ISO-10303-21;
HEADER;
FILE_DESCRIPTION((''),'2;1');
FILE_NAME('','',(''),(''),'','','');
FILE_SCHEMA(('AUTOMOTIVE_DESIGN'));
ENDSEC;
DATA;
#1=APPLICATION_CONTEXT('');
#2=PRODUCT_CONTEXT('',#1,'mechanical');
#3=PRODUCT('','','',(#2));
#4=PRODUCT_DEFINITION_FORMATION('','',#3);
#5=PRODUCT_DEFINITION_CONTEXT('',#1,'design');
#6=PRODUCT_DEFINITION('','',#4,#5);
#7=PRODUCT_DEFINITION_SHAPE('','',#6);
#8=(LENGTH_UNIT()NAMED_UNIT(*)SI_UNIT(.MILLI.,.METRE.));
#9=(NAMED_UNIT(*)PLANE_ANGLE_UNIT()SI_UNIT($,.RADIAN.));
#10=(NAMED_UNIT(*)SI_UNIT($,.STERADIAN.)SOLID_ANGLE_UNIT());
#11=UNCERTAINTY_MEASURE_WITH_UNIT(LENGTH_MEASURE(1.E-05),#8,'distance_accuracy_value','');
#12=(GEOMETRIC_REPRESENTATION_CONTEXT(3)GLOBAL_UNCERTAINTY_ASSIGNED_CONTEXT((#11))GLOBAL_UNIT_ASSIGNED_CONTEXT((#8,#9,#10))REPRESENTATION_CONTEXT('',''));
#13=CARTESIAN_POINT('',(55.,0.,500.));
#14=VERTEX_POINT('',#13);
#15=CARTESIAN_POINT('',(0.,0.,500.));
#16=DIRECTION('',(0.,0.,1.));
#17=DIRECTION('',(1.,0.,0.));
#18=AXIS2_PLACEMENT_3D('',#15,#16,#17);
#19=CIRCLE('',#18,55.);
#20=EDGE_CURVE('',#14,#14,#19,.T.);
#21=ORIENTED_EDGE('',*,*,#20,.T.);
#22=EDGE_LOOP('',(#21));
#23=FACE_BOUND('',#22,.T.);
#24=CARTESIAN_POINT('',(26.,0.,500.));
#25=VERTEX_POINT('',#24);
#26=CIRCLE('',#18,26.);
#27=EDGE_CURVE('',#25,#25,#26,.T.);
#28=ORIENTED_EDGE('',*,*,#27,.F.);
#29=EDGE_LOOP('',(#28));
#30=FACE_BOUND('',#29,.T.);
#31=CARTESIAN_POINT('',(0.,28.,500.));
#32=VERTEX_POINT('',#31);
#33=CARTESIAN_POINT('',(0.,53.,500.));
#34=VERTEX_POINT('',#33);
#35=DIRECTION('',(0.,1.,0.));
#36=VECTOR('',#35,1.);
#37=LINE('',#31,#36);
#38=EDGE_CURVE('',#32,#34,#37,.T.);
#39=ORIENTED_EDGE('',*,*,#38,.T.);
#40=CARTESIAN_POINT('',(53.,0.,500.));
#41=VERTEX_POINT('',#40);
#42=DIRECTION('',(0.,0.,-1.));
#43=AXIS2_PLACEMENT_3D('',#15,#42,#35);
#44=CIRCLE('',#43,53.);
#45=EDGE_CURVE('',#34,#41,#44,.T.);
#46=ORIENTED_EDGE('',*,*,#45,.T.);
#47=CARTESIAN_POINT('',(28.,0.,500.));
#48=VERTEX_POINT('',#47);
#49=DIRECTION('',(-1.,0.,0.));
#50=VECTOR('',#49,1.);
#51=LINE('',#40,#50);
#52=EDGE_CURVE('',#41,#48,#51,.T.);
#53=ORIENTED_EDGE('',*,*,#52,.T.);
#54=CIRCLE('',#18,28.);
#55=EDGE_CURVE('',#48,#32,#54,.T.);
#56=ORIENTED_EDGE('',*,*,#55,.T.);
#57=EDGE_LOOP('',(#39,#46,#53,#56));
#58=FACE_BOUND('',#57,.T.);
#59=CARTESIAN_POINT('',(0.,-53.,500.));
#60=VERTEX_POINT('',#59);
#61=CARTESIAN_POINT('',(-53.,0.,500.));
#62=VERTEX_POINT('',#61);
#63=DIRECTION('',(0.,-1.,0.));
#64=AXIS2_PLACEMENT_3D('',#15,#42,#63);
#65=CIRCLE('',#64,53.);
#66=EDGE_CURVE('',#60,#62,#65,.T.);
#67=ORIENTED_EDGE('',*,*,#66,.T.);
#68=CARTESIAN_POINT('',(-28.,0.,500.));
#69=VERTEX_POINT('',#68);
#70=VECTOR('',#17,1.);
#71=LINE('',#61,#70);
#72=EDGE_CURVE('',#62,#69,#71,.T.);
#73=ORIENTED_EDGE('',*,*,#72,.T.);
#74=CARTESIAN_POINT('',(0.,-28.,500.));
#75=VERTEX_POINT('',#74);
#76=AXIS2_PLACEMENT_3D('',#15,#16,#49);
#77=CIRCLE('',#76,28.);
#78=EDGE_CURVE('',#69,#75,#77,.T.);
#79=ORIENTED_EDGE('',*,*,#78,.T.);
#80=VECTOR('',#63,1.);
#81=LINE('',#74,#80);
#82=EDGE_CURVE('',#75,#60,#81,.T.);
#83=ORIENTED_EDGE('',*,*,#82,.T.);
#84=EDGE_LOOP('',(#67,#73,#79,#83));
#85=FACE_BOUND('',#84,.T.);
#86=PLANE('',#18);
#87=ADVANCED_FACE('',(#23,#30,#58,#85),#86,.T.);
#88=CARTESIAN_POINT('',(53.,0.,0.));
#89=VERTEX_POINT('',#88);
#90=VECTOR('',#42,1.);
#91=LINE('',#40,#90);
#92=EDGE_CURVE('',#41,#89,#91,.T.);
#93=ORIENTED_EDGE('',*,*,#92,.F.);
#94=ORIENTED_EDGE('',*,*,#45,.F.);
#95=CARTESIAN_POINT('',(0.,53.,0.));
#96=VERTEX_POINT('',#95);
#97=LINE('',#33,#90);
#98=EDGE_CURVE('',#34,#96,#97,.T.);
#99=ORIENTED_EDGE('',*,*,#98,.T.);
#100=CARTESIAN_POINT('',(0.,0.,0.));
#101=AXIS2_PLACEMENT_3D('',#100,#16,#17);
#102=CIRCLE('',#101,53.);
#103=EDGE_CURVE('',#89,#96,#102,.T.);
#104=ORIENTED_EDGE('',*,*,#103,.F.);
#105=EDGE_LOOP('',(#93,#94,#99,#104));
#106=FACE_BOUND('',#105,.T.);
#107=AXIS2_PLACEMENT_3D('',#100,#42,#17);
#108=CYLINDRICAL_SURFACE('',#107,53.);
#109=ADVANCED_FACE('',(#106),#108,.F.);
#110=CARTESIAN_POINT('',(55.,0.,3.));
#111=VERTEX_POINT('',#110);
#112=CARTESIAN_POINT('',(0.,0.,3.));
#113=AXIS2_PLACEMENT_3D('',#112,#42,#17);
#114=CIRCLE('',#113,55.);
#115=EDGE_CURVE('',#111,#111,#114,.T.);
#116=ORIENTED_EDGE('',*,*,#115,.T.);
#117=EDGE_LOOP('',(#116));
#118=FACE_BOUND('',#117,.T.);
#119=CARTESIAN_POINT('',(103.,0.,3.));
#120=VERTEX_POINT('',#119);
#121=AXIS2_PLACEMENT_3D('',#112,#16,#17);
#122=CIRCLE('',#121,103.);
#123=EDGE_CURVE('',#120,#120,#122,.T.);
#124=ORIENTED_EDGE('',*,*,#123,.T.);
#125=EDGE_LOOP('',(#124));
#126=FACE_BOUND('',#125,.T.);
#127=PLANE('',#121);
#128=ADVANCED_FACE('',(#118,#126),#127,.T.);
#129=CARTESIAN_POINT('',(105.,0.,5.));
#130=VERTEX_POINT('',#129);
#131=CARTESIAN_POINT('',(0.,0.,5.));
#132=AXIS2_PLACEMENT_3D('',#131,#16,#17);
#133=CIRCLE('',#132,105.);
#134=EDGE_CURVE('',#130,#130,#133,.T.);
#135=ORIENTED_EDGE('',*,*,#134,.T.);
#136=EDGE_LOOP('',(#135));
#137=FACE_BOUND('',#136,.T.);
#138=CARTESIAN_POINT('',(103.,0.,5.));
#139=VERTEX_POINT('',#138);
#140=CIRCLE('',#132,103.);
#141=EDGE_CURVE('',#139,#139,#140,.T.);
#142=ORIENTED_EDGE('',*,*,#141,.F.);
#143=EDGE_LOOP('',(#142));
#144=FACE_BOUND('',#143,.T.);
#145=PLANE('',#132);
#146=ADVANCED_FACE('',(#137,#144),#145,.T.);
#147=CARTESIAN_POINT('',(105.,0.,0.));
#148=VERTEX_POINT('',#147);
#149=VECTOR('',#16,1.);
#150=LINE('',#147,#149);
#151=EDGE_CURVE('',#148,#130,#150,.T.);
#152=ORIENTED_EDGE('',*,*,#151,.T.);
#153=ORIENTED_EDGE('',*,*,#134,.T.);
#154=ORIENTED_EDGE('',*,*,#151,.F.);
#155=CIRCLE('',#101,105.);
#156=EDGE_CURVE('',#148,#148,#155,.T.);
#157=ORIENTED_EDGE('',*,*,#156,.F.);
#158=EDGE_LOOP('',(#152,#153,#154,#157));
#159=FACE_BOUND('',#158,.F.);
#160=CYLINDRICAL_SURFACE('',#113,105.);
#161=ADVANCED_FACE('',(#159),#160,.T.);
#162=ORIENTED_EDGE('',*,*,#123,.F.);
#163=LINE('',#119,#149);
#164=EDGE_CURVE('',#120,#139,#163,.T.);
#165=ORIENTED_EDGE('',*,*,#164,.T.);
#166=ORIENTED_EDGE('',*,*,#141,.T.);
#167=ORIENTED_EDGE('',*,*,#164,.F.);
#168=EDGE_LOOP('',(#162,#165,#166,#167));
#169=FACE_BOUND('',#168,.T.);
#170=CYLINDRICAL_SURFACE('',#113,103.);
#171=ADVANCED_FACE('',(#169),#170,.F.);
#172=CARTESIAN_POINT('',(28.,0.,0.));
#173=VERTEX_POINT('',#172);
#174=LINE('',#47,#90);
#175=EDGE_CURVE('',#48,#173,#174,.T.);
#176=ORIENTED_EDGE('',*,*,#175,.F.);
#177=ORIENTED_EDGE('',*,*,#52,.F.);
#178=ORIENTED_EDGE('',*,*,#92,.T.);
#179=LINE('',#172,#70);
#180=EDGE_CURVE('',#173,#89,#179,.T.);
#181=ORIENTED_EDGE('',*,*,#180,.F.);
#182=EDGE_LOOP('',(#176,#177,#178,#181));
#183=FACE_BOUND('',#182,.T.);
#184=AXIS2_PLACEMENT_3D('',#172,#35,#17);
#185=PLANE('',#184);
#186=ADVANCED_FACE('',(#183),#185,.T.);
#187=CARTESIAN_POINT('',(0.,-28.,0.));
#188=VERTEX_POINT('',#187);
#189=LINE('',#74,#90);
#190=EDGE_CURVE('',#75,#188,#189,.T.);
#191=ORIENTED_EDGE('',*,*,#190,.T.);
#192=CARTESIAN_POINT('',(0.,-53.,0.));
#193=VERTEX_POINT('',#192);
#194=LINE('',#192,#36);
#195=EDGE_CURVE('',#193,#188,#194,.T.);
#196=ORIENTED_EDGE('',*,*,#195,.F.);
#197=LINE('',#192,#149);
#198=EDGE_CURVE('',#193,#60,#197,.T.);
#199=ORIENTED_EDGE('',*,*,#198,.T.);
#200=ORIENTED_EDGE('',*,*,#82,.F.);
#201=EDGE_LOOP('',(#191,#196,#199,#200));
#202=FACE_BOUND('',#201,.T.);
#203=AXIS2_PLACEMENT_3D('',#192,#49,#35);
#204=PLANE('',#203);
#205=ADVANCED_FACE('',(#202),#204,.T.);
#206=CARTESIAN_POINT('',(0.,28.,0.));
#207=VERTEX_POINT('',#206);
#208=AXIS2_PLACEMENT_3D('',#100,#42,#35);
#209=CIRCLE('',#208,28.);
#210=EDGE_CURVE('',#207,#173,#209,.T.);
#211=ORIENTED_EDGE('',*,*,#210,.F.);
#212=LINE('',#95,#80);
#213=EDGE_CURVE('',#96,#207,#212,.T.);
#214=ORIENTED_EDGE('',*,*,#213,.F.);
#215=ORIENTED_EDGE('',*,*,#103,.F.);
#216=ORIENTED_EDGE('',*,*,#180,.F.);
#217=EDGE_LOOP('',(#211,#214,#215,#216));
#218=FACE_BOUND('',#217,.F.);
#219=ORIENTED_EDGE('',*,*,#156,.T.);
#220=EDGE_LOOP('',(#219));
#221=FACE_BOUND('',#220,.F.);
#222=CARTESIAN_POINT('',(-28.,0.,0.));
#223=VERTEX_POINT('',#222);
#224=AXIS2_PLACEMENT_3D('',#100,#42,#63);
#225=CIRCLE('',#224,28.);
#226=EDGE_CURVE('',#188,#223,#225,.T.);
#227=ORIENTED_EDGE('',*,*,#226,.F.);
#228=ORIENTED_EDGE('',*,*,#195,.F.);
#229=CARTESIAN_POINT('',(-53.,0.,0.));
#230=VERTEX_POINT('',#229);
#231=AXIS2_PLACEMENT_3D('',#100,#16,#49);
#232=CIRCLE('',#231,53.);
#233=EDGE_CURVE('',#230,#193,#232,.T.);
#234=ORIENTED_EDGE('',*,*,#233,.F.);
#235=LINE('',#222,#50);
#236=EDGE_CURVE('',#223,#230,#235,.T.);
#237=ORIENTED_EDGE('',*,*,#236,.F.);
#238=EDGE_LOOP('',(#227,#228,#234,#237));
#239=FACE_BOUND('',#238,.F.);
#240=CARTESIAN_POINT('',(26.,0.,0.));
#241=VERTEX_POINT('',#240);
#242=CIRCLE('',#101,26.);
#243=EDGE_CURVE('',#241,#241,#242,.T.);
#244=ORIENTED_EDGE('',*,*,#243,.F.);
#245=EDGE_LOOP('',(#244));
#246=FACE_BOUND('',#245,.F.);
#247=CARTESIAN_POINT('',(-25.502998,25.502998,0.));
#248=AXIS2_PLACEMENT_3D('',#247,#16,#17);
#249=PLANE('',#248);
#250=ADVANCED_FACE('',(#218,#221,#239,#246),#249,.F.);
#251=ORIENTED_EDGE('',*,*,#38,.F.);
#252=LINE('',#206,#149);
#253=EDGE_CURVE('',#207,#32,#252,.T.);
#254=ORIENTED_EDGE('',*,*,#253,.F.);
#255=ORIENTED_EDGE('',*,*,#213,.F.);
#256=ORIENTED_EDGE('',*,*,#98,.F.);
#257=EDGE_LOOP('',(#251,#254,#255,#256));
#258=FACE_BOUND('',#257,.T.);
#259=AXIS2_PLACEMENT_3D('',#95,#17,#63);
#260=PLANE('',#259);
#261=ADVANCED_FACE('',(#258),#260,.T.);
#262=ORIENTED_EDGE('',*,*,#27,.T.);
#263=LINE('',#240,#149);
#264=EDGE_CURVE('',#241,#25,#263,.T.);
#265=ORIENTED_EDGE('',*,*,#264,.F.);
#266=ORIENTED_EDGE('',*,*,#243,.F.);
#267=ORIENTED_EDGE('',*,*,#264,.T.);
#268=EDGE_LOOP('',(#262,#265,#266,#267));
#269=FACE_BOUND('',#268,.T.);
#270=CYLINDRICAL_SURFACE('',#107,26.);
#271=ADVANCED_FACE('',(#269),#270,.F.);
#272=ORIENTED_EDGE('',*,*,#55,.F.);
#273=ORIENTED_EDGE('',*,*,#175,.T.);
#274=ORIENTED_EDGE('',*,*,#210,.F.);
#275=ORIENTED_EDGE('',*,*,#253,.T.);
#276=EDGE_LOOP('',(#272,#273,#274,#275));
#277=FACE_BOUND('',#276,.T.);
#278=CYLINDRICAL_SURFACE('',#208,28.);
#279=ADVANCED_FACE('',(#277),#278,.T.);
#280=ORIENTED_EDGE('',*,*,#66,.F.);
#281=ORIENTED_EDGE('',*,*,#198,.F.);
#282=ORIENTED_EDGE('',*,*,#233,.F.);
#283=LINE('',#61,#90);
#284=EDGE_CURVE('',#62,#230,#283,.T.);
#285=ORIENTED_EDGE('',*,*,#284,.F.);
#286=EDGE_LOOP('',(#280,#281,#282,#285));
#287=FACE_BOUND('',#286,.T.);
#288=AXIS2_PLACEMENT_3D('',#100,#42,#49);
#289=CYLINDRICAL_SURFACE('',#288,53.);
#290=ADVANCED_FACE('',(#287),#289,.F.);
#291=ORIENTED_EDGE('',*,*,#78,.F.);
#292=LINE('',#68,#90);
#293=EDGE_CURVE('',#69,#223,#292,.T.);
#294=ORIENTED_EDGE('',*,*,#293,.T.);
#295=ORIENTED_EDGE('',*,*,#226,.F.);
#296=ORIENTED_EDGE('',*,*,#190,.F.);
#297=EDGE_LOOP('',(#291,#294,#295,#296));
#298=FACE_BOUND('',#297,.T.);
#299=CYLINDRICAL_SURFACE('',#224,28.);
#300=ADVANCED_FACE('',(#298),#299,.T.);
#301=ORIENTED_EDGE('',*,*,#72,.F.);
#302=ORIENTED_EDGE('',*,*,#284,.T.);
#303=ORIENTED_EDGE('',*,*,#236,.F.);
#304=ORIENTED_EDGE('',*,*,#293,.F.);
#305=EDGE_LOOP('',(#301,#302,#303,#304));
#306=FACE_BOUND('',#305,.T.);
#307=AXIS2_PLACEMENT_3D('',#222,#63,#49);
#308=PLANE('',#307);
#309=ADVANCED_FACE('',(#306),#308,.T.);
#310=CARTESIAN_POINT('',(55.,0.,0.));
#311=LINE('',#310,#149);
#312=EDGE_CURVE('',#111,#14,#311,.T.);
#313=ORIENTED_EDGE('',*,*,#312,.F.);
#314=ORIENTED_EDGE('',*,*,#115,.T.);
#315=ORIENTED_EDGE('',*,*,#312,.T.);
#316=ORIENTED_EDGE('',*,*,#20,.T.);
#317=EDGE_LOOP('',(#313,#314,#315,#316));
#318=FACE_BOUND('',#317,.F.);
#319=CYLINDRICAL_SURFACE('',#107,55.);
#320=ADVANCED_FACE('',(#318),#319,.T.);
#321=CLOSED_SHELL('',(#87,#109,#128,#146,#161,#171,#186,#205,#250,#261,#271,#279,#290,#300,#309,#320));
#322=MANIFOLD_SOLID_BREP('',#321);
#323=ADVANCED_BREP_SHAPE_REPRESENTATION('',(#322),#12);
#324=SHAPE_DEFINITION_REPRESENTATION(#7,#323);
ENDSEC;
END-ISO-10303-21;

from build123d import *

# Parameters (mm, degrees)
F0_R     = 105
F0_R_2   = 55
F0_R_3   = 26
F1_DEPTH = 3
F2_DEPTH = 500
F3_DEPTH = 500
F4_R     = 105
F4_R_2   = 103
F5_DEPTH = 2
F6_DEPTH = 500
F7_DEPTH = 25


# Not quite as in the source:
# - after a boolean that leaves OpenCascade's solid faulty, fix() repairs it


with BuildPart() as f1:
    # F0 (on Top) → F1 (new body)
    with BuildSketch(Plane.XY):
        Circle(F0_R)
        Circle(F0_R_2, mode=Mode.SUBTRACT)
        Circle(F0_R_2)
        with BuildLine():
            ThreePointArc((0, 53), (37.4766594029, 37.4766594029), (53, 0))
            ThreePointArc((53, 0), (37.4766594029, -37.4766594029), (0, -53))
            ThreePointArc((0, -53), (-37.4766594029, -37.4766594029), (-53, 0))
            ThreePointArc((-53, 0), (-37.4766594029, 37.4766594029), (0, 53))
        make_face(mode=Mode.SUBTRACT)
        with BuildLine():
            ThreePointArc((0, 28), (19.7989898732, 19.7989898732), (28, 0))
            Line((28, 0), (53, 0))
            ThreePointArc((53, 0), (37.4766594029, 37.4766594029), (0, 53))
            Line((0, 53), (0, 28))
        make_face()
        with BuildLine():
            ThreePointArc((-28, 0), (-19.7989898732, 19.7989898732), (0, 28))
            Line((0, 28), (0, 53))
            ThreePointArc((0, 53), (-37.4766594029, 37.4766594029), (-53, 0))
            Line((-53, 0), (-28, 0))
        make_face()
        with BuildLine():
            Line((0, -53), (0, -28))
            ThreePointArc((0, -28), (-19.7989898732, -19.7989898732), (-28, 0))
            Line((-28, 0), (-53, 0))
            ThreePointArc((-53, 0), (-37.4766594029, -37.4766594029), (0, -53))
        make_face()
        with BuildLine():
            Line((53, 0), (28, 0))
            ThreePointArc((28, 0), (19.7989898732, -19.7989898732), (0, -28))
            Line((0, -28), (0, -53))
            ThreePointArc((0, -53), (37.4766594029, -37.4766594029), (53, 0))
        make_face()
        with BuildLine():
            ThreePointArc((0, -28), (19.7989898732, -19.7989898732), (28, 0))
            ThreePointArc((28, 0), (19.7989898732, 19.7989898732), (0, 28))
            ThreePointArc((0, 28), (-19.7989898732, 19.7989898732), (-28, 0))
            ThreePointArc((-28, 0), (-19.7989898732, -19.7989898732), (0, -28))
        make_face()
        Circle(F0_R_3, mode=Mode.SUBTRACT)
    extrude(amount=F1_DEPTH)

    # F0 (on Top) → F2 (join)
    with BuildSketch(Plane.XY):
        with BuildLine():
            ThreePointArc((0, -28), (19.7989898732, -19.7989898732), (28, 0))
            ThreePointArc((28, 0), (19.7989898732, 19.7989898732), (0, 28))
            ThreePointArc((0, 28), (-19.7989898732, 19.7989898732), (-28, 0))
            ThreePointArc((-28, 0), (-19.7989898732, -19.7989898732), (0, -28))
        make_face()
        Circle(F0_R_3, mode=Mode.SUBTRACT)
    extrude(amount=F2_DEPTH)

    # F0 (on Top) → F3 (join)
    with BuildSketch(Plane.XY):
        Circle(F0_R_2)
        with BuildLine():
            ThreePointArc((0, 53), (37.4766594029, 37.4766594029), (53, 0))
            ThreePointArc((53, 0), (37.4766594029, -37.4766594029), (0, -53))
            ThreePointArc((0, -53), (-37.4766594029, -37.4766594029), (-53, 0))
            ThreePointArc((-53, 0), (-37.4766594029, 37.4766594029), (0, 53))
        make_face(mode=Mode.SUBTRACT)
    extrude(amount=F3_DEPTH)

    # F4 (on face) → F5 (join)
    with BuildSketch(Plane.XY.offset(3)):
        Circle(F4_R)
        Circle(F4_R_2, mode=Mode.SUBTRACT)
    extrude(amount=F5_DEPTH)

    # F0 (on Top) → F6 (join)
    with BuildSketch(Plane.XY):
        with BuildLine():
            ThreePointArc((-28, 0), (-19.7989898732, 19.7989898732), (0, 28))
            Line((0, 28), (0, 53))
            ThreePointArc((0, 53), (-37.4766594029, 37.4766594029), (-53, 0))
            Line((-53, 0), (-28, 0))
        make_face()
        with BuildLine():
            Line((53, 0), (28, 0))
            ThreePointArc((28, 0), (19.7989898732, -19.7989898732), (0, -28))
            Line((0, -28), (0, -53))
            ThreePointArc((0, -53), (37.4766594029, -37.4766594029), (53, 0))
        make_face()
    extrude(amount=F6_DEPTH)

    # F0 (on Top) → F7 (cut)
    with BuildSketch(Plane.XY):
        with BuildLine():
            Line((0, -53), (0, -28))
            ThreePointArc((0, -28), (-19.7989898732, -19.7989898732), (-28, 0))
            Line((-28, 0), (-53, 0))
            ThreePointArc((-53, 0), (-37.4766594029, -37.4766594029), (0, -53))
        make_face()
        with BuildLine():
            ThreePointArc((0, 28), (19.7989898732, 19.7989898732), (28, 0))
            Line((28, 0), (53, 0))
            ThreePointArc((53, 0), (37.4766594029, 37.4766594029), (0, 53))
            Line((0, 53), (0, 28))
        make_face()
    extrude(amount=F7_DEPTH, mode=Mode.SUBTRACT)

    add(f1.part.fix(), mode=Mode.REPLACE)


solid = f1.part
